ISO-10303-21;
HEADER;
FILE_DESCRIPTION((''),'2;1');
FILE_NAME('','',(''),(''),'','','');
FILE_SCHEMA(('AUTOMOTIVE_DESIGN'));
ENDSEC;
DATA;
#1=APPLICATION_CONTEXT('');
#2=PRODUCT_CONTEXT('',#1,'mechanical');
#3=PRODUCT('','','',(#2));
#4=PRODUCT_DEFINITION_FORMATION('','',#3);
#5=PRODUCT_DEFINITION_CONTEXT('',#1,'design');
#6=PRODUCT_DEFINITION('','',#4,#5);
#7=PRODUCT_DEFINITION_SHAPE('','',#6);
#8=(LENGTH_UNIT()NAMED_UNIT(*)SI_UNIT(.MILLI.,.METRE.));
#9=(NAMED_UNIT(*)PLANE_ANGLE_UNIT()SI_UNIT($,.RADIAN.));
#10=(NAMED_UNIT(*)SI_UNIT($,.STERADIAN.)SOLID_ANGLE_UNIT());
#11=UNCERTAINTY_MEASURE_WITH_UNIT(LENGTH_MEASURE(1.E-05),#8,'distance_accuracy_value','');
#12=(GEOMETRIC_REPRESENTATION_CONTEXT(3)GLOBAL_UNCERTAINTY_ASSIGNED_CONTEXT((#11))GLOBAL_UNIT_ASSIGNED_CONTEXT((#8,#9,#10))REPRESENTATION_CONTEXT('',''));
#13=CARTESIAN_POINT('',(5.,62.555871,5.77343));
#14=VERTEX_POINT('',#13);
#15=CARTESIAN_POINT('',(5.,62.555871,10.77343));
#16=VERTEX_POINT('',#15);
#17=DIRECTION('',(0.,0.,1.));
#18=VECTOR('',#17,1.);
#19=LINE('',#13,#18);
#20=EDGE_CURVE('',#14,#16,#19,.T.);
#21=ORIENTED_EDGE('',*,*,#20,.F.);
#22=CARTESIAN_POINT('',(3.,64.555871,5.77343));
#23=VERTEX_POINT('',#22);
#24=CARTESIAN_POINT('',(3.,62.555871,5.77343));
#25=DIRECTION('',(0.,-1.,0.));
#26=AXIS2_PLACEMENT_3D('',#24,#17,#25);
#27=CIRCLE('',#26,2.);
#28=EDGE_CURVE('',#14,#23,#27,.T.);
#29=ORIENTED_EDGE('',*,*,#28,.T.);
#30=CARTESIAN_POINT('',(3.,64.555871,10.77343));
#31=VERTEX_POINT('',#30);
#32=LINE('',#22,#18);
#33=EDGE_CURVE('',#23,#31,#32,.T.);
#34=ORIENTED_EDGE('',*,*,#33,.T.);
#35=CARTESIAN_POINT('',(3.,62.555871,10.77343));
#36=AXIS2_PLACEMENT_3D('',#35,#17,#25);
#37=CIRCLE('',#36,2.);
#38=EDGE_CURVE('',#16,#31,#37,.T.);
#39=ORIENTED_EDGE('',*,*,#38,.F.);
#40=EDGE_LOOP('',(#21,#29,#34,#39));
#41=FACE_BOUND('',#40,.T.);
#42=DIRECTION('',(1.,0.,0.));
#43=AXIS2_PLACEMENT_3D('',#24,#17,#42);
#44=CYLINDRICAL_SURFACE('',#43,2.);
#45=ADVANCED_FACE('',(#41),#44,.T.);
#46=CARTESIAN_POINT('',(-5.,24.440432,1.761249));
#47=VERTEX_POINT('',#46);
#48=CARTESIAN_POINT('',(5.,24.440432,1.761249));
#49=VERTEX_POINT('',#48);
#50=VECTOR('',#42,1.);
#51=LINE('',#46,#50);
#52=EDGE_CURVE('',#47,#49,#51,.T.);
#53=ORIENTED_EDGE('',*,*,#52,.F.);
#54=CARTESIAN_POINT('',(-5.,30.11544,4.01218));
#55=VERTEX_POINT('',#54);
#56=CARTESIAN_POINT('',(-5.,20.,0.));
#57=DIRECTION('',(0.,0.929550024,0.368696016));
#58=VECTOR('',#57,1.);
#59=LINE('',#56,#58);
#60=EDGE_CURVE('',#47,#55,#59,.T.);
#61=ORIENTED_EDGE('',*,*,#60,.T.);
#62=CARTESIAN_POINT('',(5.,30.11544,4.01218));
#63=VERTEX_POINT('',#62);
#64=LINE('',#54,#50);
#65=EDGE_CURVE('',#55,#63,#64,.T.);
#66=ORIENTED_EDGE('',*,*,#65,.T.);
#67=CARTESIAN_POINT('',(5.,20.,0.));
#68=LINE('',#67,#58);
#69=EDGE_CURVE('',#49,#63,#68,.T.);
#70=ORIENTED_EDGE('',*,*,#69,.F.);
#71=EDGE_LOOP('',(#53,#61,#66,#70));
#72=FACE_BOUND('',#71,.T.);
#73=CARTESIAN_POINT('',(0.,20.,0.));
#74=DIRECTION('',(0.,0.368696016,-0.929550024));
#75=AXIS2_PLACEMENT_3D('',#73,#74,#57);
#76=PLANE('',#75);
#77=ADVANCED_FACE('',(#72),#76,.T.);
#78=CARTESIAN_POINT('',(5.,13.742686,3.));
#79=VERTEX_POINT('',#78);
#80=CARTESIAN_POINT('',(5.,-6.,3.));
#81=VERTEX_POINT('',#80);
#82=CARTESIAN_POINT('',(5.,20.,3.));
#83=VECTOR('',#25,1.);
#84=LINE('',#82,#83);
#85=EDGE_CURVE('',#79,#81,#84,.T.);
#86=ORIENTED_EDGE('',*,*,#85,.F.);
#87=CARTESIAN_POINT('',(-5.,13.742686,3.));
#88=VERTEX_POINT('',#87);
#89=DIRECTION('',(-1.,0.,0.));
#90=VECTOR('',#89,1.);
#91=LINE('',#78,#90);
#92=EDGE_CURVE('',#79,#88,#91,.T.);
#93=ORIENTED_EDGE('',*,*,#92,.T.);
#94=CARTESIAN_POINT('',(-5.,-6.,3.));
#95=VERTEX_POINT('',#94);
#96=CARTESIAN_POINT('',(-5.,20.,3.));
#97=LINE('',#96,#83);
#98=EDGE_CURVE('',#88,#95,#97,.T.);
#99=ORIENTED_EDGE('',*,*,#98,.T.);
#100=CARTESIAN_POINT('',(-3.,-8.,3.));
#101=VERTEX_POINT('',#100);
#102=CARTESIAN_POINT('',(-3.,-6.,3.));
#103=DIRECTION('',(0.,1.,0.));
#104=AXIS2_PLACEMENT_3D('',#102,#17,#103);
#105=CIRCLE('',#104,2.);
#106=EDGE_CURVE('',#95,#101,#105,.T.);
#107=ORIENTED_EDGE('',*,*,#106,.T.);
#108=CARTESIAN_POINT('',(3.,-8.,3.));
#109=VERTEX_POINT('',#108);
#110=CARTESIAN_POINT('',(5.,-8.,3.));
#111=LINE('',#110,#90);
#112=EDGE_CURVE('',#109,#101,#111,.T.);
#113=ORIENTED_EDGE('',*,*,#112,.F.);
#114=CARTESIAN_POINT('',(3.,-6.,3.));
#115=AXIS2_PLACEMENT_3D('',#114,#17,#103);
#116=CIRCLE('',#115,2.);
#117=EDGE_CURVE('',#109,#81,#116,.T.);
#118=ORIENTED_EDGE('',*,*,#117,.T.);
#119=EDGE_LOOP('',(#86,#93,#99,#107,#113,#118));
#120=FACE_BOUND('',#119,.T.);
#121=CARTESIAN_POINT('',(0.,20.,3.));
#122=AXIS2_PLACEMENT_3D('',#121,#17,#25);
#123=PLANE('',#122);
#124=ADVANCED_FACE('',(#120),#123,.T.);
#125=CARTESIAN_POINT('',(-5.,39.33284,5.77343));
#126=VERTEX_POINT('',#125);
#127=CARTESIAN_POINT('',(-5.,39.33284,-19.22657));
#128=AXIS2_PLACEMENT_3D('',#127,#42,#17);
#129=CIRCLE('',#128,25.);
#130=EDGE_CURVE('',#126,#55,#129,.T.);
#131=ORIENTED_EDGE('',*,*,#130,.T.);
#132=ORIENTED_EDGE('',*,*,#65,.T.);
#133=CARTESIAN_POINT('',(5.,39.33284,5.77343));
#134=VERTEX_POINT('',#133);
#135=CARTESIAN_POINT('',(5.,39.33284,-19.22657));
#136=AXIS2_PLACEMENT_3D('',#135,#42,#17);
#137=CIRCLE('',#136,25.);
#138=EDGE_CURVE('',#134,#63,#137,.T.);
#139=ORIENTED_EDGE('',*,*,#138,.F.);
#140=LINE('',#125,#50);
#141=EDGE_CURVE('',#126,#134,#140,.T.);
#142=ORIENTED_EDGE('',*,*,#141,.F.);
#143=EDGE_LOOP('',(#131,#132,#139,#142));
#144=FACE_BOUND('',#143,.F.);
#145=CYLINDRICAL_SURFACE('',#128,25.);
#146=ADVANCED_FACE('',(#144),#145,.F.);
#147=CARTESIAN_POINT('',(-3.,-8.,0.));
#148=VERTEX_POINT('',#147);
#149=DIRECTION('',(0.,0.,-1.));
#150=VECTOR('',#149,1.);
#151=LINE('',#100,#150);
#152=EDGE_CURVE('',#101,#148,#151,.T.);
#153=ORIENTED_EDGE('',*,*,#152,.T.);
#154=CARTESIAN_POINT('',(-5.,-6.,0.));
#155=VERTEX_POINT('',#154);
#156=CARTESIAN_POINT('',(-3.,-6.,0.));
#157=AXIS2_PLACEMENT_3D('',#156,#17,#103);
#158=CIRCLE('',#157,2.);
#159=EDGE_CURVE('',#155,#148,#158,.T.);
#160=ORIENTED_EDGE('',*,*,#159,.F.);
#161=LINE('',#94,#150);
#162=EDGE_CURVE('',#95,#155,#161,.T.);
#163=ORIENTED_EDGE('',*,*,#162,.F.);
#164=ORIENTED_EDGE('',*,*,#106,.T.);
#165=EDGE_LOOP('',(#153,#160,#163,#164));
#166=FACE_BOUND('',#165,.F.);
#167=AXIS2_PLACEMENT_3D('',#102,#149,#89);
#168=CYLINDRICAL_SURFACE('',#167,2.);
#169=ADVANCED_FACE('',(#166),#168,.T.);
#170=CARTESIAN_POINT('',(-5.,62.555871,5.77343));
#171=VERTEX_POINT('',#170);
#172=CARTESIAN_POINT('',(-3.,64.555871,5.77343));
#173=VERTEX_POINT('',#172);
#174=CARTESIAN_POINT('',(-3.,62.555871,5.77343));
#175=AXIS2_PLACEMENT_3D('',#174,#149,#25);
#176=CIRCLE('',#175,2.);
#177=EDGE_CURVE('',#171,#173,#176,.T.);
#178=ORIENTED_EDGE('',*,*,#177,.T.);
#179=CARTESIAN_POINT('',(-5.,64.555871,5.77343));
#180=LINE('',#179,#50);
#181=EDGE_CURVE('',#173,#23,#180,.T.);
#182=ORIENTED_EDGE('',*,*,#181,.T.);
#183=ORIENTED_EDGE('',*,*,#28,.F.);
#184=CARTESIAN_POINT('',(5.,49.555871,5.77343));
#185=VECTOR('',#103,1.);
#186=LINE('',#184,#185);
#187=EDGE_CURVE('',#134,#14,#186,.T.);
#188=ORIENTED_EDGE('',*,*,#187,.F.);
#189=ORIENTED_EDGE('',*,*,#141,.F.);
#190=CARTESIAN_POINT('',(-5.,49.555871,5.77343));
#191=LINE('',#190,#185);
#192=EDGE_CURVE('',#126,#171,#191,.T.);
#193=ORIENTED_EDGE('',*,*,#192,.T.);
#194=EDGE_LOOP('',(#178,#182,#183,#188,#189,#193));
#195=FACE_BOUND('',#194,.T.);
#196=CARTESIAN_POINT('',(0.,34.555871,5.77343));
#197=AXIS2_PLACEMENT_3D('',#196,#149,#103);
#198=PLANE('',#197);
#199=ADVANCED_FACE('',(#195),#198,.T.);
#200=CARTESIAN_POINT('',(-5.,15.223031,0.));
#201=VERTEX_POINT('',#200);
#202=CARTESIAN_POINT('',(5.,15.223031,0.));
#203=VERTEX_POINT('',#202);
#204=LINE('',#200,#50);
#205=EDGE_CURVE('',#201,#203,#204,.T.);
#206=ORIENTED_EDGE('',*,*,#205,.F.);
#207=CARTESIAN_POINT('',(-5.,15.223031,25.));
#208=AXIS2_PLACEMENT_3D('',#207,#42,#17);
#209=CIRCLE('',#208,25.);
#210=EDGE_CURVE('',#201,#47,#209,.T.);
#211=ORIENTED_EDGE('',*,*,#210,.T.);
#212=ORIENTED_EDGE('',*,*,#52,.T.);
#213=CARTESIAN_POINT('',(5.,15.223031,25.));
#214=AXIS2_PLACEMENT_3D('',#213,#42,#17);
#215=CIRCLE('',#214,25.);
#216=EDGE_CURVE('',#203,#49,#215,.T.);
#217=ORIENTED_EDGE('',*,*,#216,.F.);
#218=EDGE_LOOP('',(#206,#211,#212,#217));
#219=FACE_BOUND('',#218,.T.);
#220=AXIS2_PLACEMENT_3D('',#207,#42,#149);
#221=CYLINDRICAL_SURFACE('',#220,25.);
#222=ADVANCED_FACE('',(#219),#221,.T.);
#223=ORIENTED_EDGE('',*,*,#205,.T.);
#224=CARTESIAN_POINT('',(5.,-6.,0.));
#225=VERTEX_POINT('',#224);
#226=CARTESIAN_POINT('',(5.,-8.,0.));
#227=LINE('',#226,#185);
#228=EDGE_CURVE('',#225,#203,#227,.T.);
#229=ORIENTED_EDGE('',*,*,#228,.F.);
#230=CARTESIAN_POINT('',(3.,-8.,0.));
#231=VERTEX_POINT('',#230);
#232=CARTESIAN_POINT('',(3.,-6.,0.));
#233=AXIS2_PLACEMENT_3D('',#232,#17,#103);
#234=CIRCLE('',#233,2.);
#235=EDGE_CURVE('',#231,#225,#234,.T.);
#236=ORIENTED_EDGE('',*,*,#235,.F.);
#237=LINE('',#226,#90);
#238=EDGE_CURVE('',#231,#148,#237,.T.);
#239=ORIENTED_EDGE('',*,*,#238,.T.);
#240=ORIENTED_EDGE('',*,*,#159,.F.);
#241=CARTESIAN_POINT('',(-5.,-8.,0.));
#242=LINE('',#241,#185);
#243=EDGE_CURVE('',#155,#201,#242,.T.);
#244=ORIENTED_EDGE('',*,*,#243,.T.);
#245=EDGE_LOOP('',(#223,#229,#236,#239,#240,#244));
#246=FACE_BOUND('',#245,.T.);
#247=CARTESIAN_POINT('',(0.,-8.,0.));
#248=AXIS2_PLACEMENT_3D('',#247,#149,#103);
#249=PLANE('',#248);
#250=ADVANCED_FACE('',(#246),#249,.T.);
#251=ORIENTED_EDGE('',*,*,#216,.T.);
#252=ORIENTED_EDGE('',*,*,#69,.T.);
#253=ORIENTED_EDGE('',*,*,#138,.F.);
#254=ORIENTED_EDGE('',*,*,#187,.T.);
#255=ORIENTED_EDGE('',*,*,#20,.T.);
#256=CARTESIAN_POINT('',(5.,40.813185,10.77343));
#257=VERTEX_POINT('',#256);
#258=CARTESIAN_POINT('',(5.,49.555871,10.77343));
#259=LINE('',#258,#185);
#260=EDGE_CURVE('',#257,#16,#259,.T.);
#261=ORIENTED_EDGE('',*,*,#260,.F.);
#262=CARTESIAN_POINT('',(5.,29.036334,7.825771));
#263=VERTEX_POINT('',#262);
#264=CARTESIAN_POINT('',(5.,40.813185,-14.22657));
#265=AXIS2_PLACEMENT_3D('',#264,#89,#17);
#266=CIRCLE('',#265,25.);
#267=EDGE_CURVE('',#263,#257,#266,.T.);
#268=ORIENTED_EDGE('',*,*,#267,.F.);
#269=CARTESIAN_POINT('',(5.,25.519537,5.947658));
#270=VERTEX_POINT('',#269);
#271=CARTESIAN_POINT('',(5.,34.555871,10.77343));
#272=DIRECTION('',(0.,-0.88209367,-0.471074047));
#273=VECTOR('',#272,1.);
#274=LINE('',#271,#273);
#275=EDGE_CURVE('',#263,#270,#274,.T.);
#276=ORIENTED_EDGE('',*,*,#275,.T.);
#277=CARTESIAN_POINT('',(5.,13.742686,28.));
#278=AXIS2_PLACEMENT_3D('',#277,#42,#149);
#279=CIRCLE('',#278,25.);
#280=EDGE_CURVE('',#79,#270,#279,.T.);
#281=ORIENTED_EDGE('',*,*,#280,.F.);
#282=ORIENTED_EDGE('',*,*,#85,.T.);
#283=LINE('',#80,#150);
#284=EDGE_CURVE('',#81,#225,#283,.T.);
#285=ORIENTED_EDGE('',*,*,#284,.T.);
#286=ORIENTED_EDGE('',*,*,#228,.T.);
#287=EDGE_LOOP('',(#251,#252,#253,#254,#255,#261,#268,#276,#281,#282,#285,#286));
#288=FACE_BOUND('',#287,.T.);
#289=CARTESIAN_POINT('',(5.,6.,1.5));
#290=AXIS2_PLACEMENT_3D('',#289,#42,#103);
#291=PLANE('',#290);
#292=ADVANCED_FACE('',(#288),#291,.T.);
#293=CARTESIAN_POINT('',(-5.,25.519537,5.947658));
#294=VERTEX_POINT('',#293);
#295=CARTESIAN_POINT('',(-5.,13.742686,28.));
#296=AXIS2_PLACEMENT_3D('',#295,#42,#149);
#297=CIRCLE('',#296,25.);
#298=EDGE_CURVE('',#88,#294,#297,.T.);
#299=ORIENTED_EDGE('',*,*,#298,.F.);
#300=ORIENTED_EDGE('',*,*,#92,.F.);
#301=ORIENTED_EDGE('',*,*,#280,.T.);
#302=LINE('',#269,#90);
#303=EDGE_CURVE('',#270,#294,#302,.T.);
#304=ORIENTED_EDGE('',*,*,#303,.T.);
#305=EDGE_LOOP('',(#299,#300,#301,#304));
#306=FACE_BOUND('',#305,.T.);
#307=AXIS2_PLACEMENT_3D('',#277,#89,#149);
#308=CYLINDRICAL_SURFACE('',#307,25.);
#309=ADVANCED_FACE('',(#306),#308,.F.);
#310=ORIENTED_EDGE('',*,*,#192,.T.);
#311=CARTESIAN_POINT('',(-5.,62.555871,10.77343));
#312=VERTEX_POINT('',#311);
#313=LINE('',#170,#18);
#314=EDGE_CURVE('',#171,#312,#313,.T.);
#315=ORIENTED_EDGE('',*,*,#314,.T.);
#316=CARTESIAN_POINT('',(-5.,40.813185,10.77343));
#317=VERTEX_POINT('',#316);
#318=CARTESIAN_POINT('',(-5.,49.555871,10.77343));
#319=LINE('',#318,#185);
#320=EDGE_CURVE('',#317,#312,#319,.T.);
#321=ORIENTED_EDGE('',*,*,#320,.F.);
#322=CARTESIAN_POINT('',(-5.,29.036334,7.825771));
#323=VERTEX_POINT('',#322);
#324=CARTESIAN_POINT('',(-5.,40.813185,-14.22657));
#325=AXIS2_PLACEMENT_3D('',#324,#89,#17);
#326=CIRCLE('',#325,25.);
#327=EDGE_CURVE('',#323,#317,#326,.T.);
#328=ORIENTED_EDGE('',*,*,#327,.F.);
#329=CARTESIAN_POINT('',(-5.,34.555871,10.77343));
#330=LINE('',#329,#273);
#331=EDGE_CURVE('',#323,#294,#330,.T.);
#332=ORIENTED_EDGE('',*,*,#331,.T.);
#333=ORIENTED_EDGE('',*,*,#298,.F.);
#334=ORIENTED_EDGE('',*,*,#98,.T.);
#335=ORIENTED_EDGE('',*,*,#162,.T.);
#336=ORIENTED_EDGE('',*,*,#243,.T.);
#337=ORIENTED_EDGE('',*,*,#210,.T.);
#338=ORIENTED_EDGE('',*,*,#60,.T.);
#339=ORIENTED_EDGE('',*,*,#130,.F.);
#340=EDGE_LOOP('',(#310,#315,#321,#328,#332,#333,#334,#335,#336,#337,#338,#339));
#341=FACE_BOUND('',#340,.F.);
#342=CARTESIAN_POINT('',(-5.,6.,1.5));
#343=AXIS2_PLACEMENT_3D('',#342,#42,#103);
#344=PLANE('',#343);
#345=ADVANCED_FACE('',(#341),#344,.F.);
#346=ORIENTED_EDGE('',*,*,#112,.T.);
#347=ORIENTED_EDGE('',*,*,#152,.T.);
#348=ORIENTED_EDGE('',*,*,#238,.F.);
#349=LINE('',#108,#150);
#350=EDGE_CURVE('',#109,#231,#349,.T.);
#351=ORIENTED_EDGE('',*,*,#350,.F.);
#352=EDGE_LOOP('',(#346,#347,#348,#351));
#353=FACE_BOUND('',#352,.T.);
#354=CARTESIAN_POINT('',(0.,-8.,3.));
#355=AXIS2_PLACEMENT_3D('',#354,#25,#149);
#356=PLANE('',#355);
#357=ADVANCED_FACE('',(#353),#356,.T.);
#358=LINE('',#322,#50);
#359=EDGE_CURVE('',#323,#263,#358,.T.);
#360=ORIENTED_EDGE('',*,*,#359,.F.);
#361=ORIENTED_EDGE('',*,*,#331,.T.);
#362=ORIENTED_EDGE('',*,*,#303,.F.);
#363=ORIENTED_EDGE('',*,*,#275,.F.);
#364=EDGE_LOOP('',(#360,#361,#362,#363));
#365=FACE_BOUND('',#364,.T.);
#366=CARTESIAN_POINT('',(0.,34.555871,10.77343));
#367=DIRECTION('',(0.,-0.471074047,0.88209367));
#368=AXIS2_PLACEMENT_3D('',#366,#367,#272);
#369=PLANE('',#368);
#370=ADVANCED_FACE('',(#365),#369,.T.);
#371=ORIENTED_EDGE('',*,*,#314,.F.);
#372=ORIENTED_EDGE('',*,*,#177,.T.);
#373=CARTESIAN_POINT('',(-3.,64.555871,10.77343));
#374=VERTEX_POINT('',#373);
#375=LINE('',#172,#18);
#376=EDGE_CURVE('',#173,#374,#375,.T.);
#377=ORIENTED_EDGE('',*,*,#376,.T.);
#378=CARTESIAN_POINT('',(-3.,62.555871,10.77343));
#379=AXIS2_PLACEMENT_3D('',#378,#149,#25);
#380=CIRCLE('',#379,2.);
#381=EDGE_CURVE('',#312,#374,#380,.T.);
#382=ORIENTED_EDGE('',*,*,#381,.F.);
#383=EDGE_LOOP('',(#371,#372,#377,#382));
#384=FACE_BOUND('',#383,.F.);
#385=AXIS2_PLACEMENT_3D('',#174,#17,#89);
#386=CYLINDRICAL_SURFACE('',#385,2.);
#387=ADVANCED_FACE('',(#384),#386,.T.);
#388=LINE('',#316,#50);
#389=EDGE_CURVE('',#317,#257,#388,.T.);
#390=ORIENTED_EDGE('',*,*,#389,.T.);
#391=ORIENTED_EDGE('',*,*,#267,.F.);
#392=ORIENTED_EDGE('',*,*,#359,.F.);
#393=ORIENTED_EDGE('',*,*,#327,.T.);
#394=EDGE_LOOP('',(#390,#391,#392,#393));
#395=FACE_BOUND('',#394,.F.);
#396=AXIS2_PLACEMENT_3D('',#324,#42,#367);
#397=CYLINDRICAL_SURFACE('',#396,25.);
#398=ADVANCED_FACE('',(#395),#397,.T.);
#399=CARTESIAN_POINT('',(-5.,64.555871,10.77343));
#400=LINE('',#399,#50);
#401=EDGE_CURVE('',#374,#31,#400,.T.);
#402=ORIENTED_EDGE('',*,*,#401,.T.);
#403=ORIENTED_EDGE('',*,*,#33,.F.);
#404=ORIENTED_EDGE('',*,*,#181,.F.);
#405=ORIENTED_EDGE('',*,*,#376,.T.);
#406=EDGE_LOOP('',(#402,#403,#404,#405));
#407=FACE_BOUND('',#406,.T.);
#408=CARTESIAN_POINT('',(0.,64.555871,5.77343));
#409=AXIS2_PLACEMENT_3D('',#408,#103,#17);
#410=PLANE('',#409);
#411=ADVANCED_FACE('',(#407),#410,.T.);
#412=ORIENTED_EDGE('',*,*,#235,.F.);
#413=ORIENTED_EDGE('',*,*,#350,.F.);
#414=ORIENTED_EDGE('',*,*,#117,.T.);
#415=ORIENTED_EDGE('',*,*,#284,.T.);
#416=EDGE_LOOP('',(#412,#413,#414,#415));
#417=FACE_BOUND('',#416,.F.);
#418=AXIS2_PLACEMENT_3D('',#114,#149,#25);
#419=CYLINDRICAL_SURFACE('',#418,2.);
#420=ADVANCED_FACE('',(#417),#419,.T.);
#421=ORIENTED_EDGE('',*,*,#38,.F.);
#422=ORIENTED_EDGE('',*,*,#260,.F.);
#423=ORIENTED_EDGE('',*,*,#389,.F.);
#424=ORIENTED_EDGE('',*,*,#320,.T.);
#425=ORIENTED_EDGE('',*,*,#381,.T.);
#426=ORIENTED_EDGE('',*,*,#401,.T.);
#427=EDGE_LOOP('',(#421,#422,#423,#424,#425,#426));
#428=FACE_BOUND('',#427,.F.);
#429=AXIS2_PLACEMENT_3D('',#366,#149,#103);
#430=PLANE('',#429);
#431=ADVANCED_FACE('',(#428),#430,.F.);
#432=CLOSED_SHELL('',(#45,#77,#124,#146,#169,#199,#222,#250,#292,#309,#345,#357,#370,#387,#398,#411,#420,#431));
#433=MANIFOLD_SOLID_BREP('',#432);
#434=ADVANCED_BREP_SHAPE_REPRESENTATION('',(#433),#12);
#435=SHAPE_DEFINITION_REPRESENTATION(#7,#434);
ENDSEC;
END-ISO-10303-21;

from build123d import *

# Parameters (mm, degrees)
F0_W     = 30
F0_H     = 5
F1_DEPTH = 5
F2_R     = 25
F3_R     = 2


# Not quite as in the source:
# - a feature names something its author has since deleted; it is built from what else it names


with BuildPart() as f1:
    # F0 (on Right) → F1 (new body, symmetric)
    with BuildSketch(Plane.YZ):
        Polygon((-8, 0), (0, 0), (20, 0), (20, 3), (0, 3), (-8, 3), align=None)
        Polygon((20, 3), (20, 0), (34.5558710396, 5.7734296471), (34.5558710396, 10.7734296471), align=None)
        with Locations((49.5558710396, 8.2734296471)):
            Rectangle(F0_W, F0_H)
    extrude(amount=F1_DEPTH, both=True)

    # F2
    f2_edges = [f1.edges().sort_by_distance(p)[0] for p in [
        (0, 20, 3),
        (0, 34.555871, 10.77343),
        (0, 34.555871, 5.77343),
        (0, 20, 0),
    ]]
    fillet(f2_edges, radius=F2_R)

    # F3
    f3_edges = [f1.edges().sort_by_distance(p)[0] for p in [
        (5, 64.555871, 8.27343),
        (-5, 64.555871, 8.27343),
        (5, -8, 1.5),
        (-5, -8, 1.5),
    ]]
    fillet(f3_edges, radius=F3_R)


solid = f1.part
